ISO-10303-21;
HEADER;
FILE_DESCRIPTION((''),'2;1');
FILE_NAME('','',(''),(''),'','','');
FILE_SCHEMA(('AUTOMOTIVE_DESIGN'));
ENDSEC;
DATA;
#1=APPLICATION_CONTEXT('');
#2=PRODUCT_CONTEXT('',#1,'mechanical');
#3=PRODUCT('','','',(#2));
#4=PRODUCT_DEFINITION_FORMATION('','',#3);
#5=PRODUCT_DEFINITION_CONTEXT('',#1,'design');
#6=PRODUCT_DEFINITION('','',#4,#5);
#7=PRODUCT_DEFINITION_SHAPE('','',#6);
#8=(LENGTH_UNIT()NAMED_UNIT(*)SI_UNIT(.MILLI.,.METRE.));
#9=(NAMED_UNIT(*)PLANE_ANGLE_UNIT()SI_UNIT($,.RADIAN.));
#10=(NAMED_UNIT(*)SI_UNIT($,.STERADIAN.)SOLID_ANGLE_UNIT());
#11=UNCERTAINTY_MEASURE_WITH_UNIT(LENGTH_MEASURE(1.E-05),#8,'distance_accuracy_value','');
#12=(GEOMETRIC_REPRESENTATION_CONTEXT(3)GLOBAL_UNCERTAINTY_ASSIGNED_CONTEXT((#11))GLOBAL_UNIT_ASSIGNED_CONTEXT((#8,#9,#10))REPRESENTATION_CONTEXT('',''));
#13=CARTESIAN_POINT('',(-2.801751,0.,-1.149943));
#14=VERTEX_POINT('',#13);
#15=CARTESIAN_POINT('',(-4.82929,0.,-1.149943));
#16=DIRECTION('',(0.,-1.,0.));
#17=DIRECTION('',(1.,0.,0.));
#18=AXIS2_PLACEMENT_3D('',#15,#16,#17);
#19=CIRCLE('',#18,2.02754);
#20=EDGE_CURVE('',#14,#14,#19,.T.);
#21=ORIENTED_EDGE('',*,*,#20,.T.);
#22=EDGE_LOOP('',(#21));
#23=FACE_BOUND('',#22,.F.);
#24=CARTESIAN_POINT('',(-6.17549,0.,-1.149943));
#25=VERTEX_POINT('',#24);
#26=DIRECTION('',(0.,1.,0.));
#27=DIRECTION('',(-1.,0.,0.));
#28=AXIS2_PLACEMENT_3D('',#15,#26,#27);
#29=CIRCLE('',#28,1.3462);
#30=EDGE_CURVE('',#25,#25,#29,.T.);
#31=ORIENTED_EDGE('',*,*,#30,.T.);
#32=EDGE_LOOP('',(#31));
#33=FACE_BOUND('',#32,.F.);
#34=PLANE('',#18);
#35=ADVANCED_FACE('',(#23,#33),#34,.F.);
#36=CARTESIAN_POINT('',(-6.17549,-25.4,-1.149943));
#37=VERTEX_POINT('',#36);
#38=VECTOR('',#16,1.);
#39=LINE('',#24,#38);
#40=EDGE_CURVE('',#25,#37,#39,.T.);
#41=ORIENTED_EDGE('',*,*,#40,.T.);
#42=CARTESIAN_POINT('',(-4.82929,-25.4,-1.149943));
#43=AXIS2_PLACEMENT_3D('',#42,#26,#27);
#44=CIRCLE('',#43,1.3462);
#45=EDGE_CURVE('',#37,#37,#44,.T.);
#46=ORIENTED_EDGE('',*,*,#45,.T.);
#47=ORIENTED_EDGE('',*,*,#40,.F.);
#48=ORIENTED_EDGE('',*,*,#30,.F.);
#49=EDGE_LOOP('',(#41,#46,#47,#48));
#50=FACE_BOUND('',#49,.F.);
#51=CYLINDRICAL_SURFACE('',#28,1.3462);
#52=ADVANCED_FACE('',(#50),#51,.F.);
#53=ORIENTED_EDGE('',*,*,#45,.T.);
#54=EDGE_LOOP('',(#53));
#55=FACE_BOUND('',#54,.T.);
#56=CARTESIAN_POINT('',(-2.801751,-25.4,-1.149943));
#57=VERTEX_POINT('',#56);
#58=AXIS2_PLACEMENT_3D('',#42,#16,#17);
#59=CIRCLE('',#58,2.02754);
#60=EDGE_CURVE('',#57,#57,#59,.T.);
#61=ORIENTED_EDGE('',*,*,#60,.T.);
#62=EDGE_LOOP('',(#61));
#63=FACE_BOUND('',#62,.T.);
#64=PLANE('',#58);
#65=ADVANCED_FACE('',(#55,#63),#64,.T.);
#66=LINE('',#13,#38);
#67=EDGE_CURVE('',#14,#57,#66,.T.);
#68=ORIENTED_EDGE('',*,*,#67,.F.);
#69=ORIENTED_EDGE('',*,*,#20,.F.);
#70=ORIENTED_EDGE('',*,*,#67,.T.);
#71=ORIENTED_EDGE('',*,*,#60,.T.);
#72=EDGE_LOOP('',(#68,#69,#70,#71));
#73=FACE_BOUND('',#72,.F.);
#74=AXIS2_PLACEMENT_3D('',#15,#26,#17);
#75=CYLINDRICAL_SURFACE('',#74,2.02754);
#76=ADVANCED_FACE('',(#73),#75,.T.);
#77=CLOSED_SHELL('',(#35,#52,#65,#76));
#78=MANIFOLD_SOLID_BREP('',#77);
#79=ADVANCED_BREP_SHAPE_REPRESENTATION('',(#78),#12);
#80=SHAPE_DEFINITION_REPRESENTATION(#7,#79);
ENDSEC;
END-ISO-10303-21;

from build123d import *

# Parameters (mm, degrees)
F0_R     = 2.0275396845
F1_DEPTH = 25.4
F2_R     = 1.3462
F3_DEPTH = 25.4


# Not quite as in the source:
# - a feature names something its author has since deleted; it is built from what else it names


with BuildPart() as f1:
    # F0 (on Front) → F1 (new body)
    with BuildSketch(Plane.XZ):
        with Locations((-4.829290323, -1.1499428656)):
            Circle(F0_R)
    extrude(amount=F1_DEPTH)

    # F2 (on face) → F3 (cut)
    with BuildSketch(Plane(origin=(0, 0, 0), x_dir=(-1, 0, 0), z_dir=(0, 1, 0))):
        with Locations((4.829290323, -1.1499428656)):
            Circle(F2_R)
    extrude(amount=-F3_DEPTH, mode=Mode.SUBTRACT)


solid = f1.part
